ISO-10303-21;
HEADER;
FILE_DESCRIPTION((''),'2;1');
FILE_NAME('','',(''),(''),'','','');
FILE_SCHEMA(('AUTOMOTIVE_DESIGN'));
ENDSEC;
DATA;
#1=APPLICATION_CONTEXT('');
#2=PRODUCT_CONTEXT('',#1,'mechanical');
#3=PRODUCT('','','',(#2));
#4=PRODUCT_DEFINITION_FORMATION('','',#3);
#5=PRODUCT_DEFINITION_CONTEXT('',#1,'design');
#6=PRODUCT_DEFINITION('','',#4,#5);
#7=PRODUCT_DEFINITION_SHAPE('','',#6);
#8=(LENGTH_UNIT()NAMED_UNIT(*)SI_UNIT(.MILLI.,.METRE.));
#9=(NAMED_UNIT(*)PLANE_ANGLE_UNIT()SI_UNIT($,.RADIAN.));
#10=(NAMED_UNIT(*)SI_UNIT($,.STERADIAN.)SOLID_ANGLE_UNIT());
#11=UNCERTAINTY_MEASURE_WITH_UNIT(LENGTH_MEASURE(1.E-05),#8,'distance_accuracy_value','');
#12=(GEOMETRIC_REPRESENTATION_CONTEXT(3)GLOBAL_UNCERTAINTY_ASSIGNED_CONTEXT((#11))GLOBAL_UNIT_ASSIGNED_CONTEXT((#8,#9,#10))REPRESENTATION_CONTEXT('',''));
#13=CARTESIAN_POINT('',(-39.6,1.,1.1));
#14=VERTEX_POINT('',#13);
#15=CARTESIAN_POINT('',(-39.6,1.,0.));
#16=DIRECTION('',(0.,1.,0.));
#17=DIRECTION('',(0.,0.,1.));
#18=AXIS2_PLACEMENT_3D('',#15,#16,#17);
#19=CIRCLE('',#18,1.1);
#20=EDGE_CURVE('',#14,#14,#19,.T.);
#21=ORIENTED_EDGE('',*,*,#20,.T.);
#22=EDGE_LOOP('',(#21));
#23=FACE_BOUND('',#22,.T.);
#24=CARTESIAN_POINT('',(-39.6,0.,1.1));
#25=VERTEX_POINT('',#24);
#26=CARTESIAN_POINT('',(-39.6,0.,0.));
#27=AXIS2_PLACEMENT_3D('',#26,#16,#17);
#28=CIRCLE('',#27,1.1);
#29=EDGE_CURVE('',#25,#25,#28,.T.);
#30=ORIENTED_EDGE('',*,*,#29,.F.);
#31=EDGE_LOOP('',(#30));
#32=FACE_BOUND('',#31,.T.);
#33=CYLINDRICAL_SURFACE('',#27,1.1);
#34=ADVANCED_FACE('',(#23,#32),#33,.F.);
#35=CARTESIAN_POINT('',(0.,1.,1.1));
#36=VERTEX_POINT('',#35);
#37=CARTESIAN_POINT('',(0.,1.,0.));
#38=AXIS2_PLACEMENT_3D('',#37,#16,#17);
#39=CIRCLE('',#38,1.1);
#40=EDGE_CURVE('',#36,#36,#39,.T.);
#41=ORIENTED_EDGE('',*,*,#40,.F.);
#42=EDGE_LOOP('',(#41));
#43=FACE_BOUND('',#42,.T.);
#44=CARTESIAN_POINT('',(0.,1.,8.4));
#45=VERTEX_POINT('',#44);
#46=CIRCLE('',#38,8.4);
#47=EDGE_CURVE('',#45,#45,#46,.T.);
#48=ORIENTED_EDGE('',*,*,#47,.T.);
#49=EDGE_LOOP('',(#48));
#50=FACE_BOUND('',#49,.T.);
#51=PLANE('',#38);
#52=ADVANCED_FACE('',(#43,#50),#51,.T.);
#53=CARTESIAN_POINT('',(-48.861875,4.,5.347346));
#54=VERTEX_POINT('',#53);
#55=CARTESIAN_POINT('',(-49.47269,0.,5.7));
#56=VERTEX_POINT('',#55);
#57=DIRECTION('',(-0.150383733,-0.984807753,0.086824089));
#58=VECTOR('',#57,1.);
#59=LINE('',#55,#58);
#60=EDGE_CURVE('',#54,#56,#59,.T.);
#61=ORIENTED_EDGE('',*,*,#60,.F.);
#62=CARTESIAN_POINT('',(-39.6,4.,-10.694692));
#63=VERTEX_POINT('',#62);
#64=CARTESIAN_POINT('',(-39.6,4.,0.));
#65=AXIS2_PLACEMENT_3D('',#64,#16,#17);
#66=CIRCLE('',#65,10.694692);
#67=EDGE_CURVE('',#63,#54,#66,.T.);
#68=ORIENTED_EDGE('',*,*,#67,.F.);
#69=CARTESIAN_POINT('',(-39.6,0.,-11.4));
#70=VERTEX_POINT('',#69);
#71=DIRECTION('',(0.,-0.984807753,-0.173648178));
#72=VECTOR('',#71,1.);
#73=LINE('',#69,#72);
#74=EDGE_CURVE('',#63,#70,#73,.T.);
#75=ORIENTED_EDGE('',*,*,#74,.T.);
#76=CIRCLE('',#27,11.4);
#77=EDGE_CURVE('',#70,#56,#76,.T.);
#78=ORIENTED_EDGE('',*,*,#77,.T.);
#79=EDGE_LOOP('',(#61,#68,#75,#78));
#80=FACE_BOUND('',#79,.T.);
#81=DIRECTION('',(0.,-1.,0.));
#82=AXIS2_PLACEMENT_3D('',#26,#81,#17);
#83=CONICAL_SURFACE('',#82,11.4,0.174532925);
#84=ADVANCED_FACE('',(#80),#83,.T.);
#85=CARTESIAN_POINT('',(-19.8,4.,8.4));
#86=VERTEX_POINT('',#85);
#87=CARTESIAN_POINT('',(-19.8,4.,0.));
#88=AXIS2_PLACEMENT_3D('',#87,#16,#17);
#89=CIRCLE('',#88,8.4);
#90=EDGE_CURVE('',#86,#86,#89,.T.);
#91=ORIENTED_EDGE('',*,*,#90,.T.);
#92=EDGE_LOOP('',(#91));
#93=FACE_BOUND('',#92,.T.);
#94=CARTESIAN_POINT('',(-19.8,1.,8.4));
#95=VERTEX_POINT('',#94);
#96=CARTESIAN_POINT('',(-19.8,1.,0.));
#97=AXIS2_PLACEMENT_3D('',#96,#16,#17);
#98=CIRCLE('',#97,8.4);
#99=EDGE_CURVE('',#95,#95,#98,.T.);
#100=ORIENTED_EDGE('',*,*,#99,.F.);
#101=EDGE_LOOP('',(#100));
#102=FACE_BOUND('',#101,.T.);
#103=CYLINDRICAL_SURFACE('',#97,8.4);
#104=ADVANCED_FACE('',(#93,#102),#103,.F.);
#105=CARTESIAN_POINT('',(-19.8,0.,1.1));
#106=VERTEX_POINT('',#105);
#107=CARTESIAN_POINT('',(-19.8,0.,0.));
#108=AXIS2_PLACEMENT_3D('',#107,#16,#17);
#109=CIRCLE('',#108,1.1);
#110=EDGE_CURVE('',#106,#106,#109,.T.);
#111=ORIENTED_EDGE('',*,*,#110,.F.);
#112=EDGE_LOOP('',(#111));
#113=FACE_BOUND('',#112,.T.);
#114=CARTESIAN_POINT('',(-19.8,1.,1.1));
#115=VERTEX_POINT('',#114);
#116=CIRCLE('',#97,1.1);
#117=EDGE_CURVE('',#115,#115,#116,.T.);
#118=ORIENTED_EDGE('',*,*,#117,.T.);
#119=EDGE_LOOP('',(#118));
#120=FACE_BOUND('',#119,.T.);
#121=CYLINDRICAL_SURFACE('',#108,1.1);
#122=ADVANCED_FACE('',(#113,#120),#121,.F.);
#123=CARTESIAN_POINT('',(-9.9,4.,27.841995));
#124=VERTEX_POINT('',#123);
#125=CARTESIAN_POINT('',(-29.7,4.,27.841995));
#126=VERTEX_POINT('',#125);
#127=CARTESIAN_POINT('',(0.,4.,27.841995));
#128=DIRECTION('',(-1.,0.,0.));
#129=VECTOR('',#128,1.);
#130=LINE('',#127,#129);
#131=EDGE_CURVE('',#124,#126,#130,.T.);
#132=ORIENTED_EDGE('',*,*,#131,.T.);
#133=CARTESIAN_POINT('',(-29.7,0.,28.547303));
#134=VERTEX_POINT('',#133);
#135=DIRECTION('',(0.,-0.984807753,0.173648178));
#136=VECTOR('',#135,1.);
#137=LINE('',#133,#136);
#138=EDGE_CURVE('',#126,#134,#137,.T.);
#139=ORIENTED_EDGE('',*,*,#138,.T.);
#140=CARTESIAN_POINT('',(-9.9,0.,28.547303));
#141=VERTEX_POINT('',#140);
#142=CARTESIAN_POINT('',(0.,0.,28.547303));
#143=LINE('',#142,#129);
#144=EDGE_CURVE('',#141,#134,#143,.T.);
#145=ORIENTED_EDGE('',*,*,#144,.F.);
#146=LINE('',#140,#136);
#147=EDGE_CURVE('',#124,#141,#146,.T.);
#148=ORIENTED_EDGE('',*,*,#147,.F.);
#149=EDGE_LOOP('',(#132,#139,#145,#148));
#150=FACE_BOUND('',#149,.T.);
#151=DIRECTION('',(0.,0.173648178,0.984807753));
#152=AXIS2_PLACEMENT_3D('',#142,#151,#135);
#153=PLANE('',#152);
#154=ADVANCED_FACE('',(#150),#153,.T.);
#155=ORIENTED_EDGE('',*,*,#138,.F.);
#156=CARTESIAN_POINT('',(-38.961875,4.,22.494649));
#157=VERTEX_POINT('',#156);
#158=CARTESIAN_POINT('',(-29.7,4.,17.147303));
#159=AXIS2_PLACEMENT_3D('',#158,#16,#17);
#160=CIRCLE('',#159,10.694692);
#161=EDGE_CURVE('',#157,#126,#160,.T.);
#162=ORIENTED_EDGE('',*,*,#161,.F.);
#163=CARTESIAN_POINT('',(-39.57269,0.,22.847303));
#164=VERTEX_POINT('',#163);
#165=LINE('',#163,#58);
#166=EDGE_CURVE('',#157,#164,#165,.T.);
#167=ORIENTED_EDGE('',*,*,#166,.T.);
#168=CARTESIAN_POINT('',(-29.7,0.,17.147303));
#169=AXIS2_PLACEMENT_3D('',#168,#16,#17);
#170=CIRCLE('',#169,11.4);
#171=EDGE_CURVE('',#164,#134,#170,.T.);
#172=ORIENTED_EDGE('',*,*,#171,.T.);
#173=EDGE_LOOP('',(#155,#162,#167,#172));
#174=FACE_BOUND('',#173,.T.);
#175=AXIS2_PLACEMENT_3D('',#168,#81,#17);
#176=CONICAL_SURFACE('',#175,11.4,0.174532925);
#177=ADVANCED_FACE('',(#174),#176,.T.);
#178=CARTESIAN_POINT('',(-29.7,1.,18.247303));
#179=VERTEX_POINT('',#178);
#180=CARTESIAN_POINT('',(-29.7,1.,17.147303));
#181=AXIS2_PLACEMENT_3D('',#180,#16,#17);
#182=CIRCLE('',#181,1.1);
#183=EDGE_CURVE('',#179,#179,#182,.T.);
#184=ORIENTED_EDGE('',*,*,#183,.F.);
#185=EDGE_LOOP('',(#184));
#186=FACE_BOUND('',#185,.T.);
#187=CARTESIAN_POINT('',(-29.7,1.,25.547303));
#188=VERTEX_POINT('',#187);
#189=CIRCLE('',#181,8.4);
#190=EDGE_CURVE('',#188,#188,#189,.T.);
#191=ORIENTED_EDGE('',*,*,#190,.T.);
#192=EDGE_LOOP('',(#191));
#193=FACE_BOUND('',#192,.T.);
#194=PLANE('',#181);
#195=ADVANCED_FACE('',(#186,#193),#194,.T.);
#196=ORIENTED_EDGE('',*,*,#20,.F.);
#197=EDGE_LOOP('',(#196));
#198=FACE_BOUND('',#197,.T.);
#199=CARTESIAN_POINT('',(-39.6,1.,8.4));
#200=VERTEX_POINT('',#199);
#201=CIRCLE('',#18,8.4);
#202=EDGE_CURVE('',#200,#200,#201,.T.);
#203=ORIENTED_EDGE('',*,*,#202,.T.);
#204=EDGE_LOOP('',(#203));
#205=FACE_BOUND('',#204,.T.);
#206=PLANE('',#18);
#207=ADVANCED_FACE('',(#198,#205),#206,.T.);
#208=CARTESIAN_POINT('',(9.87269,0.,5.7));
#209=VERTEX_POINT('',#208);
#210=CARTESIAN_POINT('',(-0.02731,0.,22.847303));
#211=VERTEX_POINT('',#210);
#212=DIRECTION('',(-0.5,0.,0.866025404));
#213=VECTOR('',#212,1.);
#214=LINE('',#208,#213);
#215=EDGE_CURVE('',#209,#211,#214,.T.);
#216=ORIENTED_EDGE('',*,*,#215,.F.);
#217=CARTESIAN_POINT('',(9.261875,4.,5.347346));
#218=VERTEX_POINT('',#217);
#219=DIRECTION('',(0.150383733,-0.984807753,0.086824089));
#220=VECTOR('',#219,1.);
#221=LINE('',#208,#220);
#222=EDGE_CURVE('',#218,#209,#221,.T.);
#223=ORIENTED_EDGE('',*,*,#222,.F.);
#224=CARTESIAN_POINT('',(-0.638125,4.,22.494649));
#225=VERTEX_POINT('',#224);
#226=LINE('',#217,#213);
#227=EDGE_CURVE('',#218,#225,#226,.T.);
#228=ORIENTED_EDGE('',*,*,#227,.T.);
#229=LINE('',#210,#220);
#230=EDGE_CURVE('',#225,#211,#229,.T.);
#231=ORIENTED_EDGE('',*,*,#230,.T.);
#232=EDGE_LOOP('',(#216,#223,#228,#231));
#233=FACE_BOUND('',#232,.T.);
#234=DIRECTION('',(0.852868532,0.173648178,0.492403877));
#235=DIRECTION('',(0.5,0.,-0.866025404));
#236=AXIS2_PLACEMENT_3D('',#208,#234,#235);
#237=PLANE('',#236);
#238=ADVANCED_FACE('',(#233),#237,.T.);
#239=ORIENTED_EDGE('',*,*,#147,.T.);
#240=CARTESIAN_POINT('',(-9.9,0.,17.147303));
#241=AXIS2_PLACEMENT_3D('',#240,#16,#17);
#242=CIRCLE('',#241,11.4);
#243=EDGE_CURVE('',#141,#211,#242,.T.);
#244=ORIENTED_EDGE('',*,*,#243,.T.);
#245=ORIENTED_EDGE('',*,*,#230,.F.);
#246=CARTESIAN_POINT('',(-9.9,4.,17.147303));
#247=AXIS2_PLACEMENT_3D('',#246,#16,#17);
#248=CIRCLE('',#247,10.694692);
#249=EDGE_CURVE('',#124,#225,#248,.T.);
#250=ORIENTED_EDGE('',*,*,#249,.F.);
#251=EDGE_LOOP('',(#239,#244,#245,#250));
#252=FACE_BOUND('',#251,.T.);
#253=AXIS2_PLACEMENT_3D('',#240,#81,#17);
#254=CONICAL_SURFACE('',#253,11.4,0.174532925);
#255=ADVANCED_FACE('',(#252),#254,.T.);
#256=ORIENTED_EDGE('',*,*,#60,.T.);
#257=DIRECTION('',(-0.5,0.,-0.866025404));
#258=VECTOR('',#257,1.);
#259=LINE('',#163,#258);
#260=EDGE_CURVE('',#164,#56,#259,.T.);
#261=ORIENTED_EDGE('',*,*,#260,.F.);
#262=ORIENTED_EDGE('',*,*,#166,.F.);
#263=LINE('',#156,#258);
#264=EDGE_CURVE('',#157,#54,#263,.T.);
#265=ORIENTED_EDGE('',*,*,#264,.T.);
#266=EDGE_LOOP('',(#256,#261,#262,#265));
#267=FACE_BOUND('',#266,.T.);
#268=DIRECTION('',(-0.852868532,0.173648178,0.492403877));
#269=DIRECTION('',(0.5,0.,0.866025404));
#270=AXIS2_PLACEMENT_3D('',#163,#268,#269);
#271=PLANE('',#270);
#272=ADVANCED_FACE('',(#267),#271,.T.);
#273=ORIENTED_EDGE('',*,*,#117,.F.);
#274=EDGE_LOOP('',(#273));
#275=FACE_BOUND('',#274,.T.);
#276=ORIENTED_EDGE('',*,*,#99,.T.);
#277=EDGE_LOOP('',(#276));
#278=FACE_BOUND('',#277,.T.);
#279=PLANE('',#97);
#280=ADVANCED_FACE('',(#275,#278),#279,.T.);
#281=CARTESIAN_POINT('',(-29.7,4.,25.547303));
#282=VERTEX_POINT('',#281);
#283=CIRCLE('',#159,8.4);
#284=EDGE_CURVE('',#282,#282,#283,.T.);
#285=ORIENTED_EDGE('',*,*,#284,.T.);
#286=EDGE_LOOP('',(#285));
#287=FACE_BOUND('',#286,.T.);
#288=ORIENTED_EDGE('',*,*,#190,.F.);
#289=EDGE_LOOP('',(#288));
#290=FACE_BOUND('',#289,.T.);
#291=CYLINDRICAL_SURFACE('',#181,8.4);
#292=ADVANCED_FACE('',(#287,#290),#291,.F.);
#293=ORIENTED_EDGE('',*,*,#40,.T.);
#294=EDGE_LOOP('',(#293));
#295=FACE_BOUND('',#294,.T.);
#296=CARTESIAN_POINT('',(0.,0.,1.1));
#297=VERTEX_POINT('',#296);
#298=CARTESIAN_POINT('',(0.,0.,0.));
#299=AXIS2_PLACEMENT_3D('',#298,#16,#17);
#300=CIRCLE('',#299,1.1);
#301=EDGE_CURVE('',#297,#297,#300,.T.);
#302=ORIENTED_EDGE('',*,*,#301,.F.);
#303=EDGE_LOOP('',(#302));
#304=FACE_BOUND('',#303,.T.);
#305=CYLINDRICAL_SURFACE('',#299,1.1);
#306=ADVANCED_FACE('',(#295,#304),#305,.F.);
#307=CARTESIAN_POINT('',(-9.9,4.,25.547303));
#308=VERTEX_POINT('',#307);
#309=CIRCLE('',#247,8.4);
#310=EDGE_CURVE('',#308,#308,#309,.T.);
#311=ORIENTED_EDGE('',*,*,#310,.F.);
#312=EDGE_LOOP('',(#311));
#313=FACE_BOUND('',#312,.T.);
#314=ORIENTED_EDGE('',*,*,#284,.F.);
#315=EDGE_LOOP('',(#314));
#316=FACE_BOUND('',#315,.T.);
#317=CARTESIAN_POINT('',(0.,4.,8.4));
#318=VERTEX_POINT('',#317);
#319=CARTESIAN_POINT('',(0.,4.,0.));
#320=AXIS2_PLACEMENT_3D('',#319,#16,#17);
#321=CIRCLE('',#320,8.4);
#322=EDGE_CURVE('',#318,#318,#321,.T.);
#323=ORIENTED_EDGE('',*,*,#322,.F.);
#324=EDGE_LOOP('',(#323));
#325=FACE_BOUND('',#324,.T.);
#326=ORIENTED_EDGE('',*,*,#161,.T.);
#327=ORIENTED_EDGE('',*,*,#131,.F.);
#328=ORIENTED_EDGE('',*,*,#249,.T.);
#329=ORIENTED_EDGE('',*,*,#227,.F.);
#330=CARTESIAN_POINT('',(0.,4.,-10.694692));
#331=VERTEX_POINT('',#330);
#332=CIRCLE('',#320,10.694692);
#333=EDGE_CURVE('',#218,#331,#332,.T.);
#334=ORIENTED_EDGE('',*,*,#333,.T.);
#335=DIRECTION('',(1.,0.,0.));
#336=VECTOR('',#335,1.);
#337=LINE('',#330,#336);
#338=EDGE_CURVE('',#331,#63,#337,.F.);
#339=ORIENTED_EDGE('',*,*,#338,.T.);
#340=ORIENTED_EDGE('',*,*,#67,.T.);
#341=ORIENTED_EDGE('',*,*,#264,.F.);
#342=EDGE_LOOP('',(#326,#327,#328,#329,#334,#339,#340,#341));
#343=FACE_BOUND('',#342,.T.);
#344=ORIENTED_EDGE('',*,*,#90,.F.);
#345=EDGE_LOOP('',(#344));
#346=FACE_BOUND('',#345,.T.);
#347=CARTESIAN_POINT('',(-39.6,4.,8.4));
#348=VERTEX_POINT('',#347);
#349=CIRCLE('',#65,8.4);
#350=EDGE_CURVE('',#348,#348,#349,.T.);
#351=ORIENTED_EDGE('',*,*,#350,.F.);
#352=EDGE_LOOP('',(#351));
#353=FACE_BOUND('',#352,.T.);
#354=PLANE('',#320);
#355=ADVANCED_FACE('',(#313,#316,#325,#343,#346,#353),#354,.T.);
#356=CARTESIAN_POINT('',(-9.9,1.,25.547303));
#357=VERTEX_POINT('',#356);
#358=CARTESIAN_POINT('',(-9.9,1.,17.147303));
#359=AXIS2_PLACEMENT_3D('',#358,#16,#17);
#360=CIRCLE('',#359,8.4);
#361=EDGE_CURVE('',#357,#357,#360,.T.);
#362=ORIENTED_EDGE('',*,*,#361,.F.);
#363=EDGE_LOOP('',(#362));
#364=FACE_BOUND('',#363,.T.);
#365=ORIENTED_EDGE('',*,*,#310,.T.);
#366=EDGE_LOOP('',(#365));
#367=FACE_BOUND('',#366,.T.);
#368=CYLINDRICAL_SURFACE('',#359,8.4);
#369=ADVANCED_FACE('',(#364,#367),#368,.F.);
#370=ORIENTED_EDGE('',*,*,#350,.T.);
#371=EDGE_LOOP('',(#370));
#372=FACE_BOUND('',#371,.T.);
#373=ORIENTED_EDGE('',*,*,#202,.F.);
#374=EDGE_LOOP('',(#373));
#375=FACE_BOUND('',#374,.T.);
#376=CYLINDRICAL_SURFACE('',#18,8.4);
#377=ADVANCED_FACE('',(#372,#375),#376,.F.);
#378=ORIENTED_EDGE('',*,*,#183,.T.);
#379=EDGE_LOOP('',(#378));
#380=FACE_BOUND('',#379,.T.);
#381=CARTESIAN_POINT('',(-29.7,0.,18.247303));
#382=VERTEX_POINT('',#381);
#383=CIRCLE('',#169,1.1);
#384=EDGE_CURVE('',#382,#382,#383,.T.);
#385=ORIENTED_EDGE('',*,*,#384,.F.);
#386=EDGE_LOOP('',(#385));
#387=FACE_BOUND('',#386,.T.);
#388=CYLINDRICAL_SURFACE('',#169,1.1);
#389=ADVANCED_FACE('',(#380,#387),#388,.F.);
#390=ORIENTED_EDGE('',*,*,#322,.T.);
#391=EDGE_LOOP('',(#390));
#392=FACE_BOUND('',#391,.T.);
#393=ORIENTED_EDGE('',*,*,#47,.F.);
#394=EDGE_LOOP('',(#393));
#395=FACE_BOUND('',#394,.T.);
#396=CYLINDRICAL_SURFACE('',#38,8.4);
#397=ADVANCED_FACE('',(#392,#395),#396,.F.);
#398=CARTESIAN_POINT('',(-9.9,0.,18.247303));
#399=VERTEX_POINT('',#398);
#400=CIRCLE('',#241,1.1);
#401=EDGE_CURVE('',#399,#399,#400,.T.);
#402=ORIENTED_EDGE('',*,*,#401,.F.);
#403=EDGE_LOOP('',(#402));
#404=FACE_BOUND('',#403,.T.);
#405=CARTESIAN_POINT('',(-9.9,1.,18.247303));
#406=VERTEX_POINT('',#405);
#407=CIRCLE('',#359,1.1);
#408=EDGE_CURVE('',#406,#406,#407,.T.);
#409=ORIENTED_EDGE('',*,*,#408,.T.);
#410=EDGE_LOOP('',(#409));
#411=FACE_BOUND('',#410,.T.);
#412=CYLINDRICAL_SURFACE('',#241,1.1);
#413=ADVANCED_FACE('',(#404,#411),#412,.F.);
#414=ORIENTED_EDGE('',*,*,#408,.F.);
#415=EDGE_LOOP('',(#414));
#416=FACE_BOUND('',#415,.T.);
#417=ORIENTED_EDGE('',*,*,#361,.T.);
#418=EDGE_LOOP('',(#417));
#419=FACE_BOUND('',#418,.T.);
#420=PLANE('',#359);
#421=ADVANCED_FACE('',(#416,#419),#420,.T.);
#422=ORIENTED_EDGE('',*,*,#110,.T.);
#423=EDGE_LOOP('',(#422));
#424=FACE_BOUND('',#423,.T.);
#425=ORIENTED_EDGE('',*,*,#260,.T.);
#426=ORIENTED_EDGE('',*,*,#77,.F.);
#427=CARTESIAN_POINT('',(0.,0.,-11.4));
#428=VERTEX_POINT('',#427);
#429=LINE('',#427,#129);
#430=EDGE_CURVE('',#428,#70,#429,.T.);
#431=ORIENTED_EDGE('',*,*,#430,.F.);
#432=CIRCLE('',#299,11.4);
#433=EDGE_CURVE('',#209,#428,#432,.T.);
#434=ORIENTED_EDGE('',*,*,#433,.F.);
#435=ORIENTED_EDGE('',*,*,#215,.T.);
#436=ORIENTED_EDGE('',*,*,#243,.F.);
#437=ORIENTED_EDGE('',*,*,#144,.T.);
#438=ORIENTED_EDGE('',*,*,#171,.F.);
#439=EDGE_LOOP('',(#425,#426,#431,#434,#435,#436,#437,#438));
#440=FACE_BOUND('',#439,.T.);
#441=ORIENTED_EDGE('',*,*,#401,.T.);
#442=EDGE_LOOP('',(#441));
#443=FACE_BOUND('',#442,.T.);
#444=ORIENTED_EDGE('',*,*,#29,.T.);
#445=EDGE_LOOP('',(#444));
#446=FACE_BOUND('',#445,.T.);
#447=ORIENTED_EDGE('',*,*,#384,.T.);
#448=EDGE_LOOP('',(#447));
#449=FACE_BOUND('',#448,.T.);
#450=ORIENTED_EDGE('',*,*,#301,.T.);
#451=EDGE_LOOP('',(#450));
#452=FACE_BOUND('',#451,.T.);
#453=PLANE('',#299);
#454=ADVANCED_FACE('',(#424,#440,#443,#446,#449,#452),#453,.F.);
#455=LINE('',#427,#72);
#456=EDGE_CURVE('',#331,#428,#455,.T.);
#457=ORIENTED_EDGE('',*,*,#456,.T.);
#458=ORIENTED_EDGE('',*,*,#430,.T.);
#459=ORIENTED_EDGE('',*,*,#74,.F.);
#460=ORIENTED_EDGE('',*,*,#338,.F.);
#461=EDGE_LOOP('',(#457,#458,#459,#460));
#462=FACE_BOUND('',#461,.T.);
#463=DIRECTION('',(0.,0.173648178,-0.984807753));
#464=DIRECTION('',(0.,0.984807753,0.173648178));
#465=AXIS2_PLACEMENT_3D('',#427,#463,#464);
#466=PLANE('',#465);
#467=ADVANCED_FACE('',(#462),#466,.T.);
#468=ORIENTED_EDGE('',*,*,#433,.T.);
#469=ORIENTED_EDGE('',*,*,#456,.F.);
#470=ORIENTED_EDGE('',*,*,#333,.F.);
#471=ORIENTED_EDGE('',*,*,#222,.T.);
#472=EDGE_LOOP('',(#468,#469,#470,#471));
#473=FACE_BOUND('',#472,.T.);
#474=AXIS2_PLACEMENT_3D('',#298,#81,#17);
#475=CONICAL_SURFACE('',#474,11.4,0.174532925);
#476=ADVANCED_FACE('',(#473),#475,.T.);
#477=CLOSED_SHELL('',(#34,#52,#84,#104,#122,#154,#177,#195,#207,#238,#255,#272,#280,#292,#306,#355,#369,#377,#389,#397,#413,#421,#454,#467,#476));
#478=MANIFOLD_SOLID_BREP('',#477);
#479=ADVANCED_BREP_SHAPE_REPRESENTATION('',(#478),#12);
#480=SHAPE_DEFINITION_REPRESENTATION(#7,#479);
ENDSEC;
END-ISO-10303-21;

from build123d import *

# Parameters (mm, degrees)
BOSS_EXTRUDE1_DEPTH = 4
BOSS_EXTRUDE1_TAPER = 10
CUT_EXTRUDE1_START  = 4
SKETCH1_3_R         = 1.1
CUT_EXTRUDE1_DEPTH  = 4
CUT_EXTRUDE2_START  = 4
SKETCH1_4_R         = 8.4
SKETCH1_4_R_2       = 1.1
CUT_EXTRUDE2_DEPTH  = 3


with BuildPart() as part:
    # Sketch1 → Boss-Extrude1 (new body)
    with BuildSketch(Plane(origin=(0, 0, 0), x_dir=(1, 0, 0), z_dir=(0, 1, 0))):
        with BuildLine():
            Line((-49.472689603, -5.7), (-39.572689603, -22.847302995))
            ThreePointArc((-39.572689603, -22.847302995), (-35.4, -27.019992598), (-29.7, -28.547302995))
            Line((-29.7, -28.547302995), (-9.9, -28.547302995))
            ThreePointArc((-9.9, -28.547302995), (-4.2, -27.019992598), (-0.027310397, -22.847302995))
            Line((-0.027310397, -22.847302995), (9.872689603, -5.7))
            ThreePointArc((9.872689603, -5.7), (9.872689603, 5.7), (0, 11.4))
            Line((0, 11.4), (-39.6, 11.4))
            ThreePointArc((-39.6, 11.4), (-49.472689603, 5.7), (-49.472689603, -5.7))
        make_face()
    extrude(amount=BOSS_EXTRUDE1_DEPTH, taper=BOSS_EXTRUDE1_TAPER)

    # Sketch1<3> → Cut-Extrude1 (cut)
    with BuildSketch(Plane(origin=(0, 0, 0), x_dir=(1, 0, 0), z_dir=(0, 1, 0)).offset(CUT_EXTRUDE1_START)):
        with Locations(Location((-9.9, -17.147302995, 0), (0, 0, 270))):
            Circle(SKETCH1_3_R)
        with Locations(Location((0, 0, 0), (0, 0, 270))):
            Circle(SKETCH1_3_R)
        with Locations(Location((-29.7, -17.147302995, 0), (0, 0, 270))):
            Circle(SKETCH1_3_R)
        with Locations(Location((-39.6, 0, 0), (0, 0, 270))):
            Circle(SKETCH1_3_R)
        with Locations(Location((-19.8, 0, 0), (0, 0, 270))):
            Circle(SKETCH1_3_R)
    extrude(amount=-CUT_EXTRUDE1_DEPTH, mode=Mode.SUBTRACT)

    # Sketch1<4> → Cut-Extrude2 (cut)
    # profile 1 of 5: a face of its own
    with BuildSketch(Plane(origin=(0, 0, 0), x_dir=(1, 0, 0), z_dir=(0, 1, 0)).offset(CUT_EXTRUDE2_START)):
        with Locations(Location((-19.8, 0, 0), (0, 0, 270))):
            Circle(SKETCH1_4_R)
        with Locations(Location((-19.8, 0, 0), (0, 0, 270))):
            Circle(SKETCH1_4_R_2, mode=Mode.SUBTRACT)
    # profile 2 of 5: a face of its own
    with BuildSketch(Plane(origin=(0, 0, 0), x_dir=(1, 0, 0), z_dir=(0, 1, 0)).offset(CUT_EXTRUDE2_START)):
        with Locations(Location((-9.9, -17.147302995, 0), (0, 0, 270))):
            Circle(SKETCH1_4_R)
        with Locations(Location((-9.9, -17.147302995, 0), (0, 0, 270))):
            Circle(SKETCH1_4_R_2, mode=Mode.SUBTRACT)
    # profile 3 of 5: a face of its own
    with BuildSketch(Plane(origin=(0, 0, 0), x_dir=(1, 0, 0), z_dir=(0, 1, 0)).offset(CUT_EXTRUDE2_START)):
        with Locations(Location((0, 0, 0), (0, 0, 270))):
            Circle(SKETCH1_4_R)
        with Locations(Location((0, 0, 0), (0, 0, 270))):
            Circle(SKETCH1_4_R_2, mode=Mode.SUBTRACT)
    # profile 4 of 5: a face of its own
    with BuildSketch(Plane(origin=(0, 0, 0), x_dir=(1, 0, 0), z_dir=(0, 1, 0)).offset(CUT_EXTRUDE2_START)):
        with Locations(Location((-29.7, -17.147302995, 0), (0, 0, 270))):
            Circle(SKETCH1_4_R)
        with Locations(Location((-29.7, -17.147302995, 0), (0, 0, 270))):
            Circle(SKETCH1_4_R_2, mode=Mode.SUBTRACT)
    # profile 5 of 5: a face of its own
    with BuildSketch(Plane(origin=(0, 0, 0), x_dir=(1, 0, 0), z_dir=(0, 1, 0)).offset(CUT_EXTRUDE2_START)):
        with Locations(Location((-39.6, 0, 0), (0, 0, 270))):
            Circle(SKETCH1_4_R)
        with Locations(Location((-39.6, 0, 0), (0, 0, 270))):
            Circle(SKETCH1_4_R_2, mode=Mode.SUBTRACT)
    extrude(amount=-CUT_EXTRUDE2_DEPTH, mode=Mode.SUBTRACT)


solid = part.part
